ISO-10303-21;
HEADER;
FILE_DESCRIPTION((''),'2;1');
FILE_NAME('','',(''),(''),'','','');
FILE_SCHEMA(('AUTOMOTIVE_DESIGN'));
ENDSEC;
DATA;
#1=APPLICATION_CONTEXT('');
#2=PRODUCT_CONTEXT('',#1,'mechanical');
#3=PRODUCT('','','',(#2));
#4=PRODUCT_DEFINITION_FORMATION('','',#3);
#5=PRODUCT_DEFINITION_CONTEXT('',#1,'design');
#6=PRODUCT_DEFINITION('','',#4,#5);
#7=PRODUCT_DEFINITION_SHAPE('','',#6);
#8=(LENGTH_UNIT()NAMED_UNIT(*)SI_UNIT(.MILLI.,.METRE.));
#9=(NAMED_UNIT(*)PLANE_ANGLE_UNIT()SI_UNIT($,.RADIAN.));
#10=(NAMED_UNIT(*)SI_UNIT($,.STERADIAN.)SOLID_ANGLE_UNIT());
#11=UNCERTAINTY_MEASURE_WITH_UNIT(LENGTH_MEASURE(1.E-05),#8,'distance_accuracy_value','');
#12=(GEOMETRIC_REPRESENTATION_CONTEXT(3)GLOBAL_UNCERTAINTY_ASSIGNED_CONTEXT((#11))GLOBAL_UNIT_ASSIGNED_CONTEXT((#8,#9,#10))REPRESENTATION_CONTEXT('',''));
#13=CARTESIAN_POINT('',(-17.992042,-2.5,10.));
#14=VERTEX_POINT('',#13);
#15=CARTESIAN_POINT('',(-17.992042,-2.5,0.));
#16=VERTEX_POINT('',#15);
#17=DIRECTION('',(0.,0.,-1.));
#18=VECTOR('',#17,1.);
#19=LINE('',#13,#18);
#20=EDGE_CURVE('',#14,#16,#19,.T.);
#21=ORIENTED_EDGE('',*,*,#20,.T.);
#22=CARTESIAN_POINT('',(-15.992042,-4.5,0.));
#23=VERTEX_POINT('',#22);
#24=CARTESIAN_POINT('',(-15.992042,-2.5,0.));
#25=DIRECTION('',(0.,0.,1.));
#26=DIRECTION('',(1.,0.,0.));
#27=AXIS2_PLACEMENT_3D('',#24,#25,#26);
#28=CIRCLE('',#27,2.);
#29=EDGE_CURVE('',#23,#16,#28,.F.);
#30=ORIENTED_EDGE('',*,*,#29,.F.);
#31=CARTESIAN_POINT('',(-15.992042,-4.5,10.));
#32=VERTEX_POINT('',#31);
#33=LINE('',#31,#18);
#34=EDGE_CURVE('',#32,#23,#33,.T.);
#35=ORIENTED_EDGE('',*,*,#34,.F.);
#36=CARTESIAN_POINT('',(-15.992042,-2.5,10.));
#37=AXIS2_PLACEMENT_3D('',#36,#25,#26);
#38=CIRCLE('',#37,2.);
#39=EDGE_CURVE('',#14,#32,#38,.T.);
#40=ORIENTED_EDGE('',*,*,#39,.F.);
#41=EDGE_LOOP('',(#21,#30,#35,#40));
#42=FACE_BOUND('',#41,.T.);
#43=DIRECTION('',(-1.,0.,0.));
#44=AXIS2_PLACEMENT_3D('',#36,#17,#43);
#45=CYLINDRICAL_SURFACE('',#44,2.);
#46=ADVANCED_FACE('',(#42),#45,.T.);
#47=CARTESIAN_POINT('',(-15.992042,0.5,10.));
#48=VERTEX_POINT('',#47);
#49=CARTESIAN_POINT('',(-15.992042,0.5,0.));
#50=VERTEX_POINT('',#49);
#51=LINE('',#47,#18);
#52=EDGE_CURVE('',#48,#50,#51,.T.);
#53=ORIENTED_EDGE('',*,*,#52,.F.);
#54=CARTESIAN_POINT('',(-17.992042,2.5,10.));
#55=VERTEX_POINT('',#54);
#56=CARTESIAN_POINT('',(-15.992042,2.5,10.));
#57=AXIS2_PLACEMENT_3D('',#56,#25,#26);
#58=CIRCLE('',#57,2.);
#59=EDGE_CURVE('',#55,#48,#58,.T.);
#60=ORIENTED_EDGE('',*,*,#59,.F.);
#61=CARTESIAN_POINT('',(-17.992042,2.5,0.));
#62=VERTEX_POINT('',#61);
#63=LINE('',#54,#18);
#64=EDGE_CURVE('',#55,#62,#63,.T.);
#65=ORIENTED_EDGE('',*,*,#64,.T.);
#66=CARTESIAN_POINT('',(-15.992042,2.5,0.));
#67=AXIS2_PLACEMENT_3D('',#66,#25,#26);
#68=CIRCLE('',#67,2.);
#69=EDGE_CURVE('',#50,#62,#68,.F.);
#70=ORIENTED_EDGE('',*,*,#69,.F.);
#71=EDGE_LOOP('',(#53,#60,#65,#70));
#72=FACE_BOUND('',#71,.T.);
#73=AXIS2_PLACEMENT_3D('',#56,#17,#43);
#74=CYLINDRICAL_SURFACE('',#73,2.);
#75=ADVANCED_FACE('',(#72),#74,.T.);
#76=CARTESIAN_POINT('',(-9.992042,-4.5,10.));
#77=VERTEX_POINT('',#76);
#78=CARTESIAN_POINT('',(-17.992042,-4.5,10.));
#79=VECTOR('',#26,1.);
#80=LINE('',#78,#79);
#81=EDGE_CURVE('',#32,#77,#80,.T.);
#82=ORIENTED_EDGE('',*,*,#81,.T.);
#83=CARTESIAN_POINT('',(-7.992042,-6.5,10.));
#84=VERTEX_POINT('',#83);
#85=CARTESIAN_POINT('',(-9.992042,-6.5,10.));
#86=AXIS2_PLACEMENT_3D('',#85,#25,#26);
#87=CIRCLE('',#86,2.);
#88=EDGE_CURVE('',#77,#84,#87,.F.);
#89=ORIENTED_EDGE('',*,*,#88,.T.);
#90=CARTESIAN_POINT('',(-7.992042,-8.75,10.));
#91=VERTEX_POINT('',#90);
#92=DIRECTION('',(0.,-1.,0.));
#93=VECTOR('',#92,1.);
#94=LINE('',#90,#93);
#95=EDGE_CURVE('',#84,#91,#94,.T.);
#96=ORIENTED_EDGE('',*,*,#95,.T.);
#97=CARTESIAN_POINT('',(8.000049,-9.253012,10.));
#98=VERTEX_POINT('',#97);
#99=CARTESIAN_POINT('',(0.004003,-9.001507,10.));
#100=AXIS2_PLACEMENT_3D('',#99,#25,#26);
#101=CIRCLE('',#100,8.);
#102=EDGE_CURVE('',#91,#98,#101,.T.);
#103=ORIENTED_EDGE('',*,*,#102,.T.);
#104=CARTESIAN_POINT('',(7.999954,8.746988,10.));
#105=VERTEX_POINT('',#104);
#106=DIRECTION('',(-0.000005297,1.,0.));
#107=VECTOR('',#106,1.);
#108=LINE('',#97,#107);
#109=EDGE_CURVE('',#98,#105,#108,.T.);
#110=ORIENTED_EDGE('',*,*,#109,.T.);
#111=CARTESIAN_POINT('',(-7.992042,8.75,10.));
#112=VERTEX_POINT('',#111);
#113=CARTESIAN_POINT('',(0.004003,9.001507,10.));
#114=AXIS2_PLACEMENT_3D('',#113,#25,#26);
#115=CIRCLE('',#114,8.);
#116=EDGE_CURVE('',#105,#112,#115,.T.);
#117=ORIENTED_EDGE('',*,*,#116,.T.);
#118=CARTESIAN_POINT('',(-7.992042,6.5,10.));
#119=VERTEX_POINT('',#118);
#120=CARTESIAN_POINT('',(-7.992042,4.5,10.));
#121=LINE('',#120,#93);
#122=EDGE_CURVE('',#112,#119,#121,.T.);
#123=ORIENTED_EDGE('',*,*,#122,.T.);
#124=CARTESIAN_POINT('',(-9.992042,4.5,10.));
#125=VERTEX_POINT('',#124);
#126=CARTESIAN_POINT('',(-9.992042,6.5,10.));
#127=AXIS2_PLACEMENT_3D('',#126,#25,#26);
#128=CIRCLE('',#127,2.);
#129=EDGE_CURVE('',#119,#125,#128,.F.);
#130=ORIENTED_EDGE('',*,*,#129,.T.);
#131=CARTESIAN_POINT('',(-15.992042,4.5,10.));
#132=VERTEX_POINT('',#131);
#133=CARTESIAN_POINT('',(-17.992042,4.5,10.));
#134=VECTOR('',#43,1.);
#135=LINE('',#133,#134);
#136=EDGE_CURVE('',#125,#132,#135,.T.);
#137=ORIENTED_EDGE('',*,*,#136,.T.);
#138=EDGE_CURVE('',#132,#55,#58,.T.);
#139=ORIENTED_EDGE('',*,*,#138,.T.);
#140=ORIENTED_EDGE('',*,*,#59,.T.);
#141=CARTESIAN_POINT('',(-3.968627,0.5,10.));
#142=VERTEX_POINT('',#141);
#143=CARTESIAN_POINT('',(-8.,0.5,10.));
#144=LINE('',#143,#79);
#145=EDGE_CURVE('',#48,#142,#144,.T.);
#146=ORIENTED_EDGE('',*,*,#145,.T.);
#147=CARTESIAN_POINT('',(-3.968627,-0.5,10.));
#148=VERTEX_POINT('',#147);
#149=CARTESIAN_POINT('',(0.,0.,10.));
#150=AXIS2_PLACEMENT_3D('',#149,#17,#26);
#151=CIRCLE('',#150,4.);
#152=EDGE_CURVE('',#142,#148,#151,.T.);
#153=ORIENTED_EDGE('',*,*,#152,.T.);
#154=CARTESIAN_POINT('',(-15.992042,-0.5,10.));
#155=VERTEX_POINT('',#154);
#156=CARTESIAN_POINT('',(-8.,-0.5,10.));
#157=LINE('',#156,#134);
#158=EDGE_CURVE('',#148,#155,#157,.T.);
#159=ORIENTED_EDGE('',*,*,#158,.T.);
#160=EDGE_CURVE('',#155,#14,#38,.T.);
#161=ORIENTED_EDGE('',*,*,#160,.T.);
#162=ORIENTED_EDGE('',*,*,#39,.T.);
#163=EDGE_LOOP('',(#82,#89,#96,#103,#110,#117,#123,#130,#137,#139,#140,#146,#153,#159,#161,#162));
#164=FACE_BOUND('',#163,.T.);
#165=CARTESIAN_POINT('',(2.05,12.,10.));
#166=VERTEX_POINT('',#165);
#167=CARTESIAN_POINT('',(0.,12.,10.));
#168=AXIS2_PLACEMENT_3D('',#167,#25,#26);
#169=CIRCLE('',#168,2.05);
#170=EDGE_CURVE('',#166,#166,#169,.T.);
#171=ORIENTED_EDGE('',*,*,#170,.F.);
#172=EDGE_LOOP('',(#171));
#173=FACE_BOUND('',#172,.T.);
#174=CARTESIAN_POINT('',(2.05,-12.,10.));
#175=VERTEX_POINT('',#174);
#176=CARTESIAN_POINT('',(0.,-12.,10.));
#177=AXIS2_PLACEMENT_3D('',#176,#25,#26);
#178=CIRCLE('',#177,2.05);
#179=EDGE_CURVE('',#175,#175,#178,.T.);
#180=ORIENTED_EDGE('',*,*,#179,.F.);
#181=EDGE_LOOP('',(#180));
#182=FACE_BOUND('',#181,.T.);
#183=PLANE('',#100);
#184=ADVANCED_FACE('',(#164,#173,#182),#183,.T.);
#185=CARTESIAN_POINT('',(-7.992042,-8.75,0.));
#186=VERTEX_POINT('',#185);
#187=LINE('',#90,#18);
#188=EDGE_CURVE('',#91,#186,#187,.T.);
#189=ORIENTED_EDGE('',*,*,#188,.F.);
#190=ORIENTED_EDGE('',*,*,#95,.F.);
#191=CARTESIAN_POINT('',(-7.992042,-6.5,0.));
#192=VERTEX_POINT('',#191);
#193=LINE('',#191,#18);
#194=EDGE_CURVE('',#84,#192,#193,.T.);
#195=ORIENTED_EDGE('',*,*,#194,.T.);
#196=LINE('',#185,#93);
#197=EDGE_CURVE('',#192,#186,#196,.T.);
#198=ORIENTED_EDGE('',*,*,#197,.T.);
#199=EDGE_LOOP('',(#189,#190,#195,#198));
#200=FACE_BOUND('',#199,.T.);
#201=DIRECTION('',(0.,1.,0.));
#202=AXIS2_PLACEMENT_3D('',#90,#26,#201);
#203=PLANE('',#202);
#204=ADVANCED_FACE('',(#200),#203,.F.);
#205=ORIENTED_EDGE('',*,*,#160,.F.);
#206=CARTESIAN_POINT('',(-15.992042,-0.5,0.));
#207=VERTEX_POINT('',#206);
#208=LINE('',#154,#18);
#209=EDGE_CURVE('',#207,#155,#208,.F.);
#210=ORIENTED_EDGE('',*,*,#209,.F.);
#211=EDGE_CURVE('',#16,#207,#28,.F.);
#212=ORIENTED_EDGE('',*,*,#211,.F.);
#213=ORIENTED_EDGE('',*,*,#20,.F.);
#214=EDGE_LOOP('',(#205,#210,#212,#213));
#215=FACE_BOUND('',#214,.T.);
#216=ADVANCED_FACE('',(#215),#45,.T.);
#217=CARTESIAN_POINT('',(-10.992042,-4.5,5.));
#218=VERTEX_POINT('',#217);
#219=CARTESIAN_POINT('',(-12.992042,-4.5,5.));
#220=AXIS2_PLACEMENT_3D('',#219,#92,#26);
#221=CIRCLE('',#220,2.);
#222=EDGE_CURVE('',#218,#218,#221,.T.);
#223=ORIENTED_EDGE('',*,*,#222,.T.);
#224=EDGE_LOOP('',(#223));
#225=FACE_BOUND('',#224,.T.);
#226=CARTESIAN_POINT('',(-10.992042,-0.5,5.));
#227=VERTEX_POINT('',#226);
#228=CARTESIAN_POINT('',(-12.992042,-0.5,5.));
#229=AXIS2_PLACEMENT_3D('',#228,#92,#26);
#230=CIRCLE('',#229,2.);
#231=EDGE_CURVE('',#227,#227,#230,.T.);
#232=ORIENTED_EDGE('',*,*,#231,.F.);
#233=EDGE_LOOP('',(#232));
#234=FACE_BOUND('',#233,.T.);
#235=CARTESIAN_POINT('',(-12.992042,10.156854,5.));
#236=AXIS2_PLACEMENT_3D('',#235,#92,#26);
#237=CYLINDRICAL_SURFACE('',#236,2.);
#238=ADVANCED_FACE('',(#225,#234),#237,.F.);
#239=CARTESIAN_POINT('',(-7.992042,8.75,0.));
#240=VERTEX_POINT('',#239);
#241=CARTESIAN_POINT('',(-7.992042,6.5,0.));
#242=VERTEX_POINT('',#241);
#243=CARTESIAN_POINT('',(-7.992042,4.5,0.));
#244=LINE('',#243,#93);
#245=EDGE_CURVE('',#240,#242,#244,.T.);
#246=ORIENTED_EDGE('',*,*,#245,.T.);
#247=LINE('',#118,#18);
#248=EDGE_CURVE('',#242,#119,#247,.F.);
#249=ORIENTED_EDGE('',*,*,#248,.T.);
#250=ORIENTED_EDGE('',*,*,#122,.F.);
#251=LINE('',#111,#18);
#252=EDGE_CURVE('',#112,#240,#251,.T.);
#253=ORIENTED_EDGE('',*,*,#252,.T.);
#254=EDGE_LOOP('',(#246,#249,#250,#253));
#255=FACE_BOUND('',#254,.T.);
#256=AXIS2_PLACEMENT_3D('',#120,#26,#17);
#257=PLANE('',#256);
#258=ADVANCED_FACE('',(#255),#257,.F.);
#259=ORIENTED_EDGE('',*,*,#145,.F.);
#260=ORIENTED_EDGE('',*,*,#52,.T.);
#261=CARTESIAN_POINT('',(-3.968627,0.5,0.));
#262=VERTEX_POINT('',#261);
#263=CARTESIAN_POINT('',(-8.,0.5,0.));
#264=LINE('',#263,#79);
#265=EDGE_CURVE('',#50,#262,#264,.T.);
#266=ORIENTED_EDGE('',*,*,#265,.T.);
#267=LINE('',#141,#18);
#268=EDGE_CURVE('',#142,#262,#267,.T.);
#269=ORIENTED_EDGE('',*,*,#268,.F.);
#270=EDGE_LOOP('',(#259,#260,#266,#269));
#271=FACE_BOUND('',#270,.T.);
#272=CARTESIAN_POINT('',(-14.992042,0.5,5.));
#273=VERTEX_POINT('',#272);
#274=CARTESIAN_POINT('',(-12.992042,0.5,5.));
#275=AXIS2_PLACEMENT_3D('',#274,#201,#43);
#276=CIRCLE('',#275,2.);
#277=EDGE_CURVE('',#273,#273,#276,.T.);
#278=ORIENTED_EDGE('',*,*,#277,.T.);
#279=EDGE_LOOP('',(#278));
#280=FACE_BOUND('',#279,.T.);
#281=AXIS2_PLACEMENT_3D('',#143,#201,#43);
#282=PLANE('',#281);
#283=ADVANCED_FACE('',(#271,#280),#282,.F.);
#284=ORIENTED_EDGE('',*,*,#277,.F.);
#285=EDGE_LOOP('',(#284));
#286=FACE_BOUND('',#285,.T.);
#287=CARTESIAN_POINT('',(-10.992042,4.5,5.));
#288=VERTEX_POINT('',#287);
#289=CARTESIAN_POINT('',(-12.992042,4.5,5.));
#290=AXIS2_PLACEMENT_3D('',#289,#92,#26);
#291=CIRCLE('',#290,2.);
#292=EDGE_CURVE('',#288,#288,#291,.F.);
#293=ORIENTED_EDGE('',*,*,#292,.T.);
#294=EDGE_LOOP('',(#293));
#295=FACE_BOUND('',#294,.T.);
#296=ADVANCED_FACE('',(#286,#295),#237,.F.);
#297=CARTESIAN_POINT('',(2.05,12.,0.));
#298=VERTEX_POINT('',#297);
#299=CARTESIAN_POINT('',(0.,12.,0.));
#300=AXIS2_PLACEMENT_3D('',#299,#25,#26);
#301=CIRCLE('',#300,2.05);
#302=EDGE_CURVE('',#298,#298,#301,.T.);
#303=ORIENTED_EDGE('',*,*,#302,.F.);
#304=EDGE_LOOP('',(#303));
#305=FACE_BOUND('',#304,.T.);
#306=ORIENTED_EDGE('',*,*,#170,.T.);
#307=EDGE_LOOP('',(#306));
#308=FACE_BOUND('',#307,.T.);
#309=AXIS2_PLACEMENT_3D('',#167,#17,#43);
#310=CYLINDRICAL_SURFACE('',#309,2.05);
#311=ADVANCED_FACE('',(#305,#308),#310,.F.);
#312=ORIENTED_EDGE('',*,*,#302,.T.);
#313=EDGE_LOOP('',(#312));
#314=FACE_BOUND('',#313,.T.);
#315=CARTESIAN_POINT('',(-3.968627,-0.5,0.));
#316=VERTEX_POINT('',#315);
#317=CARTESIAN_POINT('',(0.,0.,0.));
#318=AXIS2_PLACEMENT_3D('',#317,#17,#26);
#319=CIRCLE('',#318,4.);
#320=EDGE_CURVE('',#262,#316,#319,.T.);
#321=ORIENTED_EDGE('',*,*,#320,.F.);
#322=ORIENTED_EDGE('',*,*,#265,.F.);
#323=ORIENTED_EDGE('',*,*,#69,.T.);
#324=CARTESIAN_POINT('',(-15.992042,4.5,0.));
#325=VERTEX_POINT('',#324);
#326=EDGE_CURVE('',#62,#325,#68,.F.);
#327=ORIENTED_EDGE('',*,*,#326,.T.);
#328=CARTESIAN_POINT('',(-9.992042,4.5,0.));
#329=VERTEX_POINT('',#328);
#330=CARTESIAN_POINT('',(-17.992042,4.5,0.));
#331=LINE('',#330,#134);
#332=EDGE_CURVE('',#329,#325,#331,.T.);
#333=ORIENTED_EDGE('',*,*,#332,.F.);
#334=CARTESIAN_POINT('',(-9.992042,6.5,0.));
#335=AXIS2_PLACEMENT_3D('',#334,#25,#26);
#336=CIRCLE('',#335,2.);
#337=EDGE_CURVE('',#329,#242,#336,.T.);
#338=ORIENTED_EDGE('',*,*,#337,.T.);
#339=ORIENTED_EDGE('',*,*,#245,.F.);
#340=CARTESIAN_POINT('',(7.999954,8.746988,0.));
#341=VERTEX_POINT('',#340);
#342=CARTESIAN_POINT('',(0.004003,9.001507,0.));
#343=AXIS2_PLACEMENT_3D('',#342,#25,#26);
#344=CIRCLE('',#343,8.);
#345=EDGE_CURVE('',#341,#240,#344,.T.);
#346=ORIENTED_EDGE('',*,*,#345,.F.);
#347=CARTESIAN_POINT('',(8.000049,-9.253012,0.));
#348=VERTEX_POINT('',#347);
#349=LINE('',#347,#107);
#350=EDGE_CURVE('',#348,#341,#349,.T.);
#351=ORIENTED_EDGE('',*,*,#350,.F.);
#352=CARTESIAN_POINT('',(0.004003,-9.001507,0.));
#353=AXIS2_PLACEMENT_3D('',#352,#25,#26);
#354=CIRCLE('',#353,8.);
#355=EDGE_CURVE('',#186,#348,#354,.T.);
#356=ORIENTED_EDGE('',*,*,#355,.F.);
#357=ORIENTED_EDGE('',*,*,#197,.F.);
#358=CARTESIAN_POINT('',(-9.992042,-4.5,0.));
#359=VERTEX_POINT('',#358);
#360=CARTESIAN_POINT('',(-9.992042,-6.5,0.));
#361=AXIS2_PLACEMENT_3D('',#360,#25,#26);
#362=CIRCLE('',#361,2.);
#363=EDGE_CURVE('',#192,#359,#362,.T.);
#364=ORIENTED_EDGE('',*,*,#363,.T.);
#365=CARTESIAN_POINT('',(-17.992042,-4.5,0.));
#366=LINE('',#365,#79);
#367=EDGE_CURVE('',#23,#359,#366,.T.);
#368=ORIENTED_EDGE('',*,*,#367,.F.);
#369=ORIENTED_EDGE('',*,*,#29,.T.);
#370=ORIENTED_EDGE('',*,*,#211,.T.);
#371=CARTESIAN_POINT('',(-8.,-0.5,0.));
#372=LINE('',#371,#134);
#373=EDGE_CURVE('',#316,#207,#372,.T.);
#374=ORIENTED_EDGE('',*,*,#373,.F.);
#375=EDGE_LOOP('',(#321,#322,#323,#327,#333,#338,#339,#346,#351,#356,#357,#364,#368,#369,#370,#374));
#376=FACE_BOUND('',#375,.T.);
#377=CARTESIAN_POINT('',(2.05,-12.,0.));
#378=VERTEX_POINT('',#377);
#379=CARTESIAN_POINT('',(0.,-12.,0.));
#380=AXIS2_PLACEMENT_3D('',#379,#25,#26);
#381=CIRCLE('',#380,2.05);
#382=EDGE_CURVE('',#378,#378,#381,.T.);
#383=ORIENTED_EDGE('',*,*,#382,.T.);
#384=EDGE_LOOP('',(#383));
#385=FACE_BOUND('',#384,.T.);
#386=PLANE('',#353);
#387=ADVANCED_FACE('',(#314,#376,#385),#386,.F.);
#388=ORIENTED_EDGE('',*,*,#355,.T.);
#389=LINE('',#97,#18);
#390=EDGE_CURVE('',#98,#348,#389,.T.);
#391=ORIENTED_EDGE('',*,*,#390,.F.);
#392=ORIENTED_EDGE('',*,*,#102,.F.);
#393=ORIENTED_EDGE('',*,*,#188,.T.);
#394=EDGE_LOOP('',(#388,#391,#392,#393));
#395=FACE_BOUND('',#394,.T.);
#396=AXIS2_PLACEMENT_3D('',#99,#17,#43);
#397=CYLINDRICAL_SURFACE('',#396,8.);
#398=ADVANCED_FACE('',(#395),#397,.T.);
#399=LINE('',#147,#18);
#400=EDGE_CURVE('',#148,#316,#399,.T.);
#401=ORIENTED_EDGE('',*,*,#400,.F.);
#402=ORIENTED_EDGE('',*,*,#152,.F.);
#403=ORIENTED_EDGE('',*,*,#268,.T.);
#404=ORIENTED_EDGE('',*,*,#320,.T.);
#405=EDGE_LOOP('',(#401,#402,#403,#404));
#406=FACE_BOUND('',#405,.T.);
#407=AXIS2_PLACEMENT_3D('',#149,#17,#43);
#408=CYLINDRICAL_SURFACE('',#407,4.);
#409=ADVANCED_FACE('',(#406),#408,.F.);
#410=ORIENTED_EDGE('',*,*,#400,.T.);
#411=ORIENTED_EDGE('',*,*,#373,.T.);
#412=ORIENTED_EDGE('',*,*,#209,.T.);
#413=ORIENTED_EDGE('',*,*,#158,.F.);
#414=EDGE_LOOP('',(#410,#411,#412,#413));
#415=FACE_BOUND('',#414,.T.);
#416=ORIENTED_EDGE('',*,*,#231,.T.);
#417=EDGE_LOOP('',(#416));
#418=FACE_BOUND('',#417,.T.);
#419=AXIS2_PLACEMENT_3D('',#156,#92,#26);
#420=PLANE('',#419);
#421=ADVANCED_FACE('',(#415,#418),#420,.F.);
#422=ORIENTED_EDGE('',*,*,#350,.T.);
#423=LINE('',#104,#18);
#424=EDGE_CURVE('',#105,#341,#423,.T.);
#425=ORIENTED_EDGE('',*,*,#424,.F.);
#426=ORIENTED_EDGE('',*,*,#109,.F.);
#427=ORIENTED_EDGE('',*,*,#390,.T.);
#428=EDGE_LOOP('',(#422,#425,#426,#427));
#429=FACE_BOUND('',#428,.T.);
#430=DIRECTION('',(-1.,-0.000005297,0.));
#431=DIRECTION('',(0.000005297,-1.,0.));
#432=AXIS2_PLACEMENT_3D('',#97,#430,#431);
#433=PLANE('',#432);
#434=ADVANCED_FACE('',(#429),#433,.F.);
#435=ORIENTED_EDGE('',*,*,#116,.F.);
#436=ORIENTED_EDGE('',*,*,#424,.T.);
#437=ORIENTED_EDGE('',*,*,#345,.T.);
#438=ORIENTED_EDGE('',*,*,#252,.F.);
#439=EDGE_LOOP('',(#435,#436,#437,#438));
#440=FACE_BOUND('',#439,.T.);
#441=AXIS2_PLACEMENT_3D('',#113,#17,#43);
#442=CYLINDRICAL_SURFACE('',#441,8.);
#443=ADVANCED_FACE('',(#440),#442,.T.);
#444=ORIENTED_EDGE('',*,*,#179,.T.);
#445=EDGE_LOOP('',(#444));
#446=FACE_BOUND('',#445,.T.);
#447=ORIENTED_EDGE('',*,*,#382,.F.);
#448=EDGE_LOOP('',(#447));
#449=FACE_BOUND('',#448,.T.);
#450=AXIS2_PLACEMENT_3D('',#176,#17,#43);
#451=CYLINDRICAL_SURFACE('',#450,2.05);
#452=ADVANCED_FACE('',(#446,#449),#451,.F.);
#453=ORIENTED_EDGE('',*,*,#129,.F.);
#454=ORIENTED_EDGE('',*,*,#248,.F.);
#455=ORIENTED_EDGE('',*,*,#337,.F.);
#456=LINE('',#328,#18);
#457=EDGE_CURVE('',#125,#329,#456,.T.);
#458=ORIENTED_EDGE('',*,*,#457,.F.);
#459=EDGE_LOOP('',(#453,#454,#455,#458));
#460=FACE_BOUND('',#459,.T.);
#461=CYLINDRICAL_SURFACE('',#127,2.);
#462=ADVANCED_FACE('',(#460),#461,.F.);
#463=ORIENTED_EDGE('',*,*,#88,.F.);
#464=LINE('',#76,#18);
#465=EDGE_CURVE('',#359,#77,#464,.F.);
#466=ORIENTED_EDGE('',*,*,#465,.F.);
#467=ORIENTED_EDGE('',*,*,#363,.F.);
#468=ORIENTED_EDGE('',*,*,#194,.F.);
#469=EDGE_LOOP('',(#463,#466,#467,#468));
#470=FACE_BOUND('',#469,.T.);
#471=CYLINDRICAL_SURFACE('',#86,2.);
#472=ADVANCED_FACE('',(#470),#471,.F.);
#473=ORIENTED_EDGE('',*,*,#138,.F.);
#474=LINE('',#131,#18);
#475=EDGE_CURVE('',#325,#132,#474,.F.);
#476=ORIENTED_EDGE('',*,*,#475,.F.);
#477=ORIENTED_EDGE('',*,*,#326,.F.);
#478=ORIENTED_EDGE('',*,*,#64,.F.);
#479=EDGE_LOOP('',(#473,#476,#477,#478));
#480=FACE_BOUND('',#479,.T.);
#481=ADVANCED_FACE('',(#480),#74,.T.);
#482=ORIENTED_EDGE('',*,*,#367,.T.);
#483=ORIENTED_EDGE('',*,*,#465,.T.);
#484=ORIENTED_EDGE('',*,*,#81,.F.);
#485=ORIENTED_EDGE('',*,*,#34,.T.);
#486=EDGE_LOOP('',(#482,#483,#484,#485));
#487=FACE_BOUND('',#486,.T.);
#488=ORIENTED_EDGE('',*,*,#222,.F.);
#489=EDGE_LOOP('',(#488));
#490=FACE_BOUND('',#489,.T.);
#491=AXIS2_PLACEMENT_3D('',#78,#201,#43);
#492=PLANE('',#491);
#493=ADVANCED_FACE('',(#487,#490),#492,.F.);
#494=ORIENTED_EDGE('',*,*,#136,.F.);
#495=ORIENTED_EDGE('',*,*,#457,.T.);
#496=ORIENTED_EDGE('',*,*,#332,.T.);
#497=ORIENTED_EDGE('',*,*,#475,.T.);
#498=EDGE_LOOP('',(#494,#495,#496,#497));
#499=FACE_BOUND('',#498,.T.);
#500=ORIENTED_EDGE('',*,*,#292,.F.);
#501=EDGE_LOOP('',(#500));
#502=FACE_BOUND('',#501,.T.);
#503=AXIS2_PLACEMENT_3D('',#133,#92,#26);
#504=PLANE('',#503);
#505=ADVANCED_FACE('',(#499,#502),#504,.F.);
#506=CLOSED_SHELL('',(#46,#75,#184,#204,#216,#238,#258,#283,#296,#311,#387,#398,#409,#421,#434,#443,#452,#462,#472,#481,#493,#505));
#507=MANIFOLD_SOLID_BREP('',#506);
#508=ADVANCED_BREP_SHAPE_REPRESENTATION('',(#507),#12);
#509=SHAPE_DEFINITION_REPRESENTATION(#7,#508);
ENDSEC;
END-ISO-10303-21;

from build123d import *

# Parameters (mm, degrees)
ESBO_O1_R                = 2.05
RESSALTO_EXTRUS_O1_DEPTH = 10
CORTE_EXTRUS_O1_REACH    = 31.766
ESBO_O2_R                = 2
FILETE1_R                = 2


with BuildPart() as part:
    # Esboço1 → Ressalto-extrusão1 (new body)
    with BuildSketch(Plane.XY):
        with BuildLine():
            Line((-7.992042116, -8.75), (-7.992042116, -4.5))
            Line((-7.992042116, -4.5), (-17.992042116, -4.5))
            Line((-17.992042116, -4.5), (-17.992042116, -0.5))
            Line((-17.992042116, -0.5), (-8, -0.5))
            Line((-8, -0.5), (-3.968626967, -0.5))
            ThreePointArc((-3.968626967, -0.5), (4, 0), (-3.968626967, 0.5))
            Line((-3.968626967, 0.5), (-8, 0.5))
            Line((-8, 0.5), (-17.992042116, 0.5))
            Line((-17.992042116, 0.5), (-17.992042116, 4.5))
            Line((-17.992042116, 4.5), (-7.992042116, 4.5))
            Line((-7.992042116, 4.5), (-7.992042116, 8.75))
            ThreePointArc((-7.992042116, 8.75), (0.005510323, 17.001506438), (7.999953669, 8.74698773))
            Line((7.999953669, 8.74698773), (8.000049012, -9.25301227))
            ThreePointArc((8.000049012, -9.25301227), (-0.247502701, -16.997552144), (-7.992042116, -8.75))
        make_face()
        with Locations((0, 12)):
            Circle(ESBO_O1_R, mode=Mode.SUBTRACT)
        with Locations((0, -12)):
            Circle(ESBO_O1_R, mode=Mode.SUBTRACT)
    extrude(amount=RESSALTO_EXTRUS_O1_DEPTH)

    # Corte-extrusão1: up to this face of the body (flat: up to its plane)
    corte_extrus_o1_end = Plane(part.part.faces().sort_by_distance((-12.992042116, 4.5, 5))[0])
    # Esboço2 → Corte-extrusão1 (cut, up to the picked face)
    with BuildSketch(Plane.XZ.offset(4.5), mode=Mode.PRIVATE) as corte_extrus_o1_sk1:
        with Locations((-12.992042116, 5)):
            Circle(ESBO_O2_R)
    corte_extrus_o1_tool1 = split(extrude(corte_extrus_o1_sk1.sketch, amount=-CORTE_EXTRUS_O1_REACH, mode=Mode.PRIVATE), bisect_by=corte_extrus_o1_end, keep=Keep.BOTH, mode=Mode.PRIVATE)
    add(corte_extrus_o1_tool1.solids().sort_by(Axis((-12.992042, -4.5, 5), (0, 1, 0)))[0], mode=Mode.SUBTRACT)

    # Filete1
    filete1_edges = [part.edges().sort_by_distance(p)[0] for p in [
        (-7.992042116, -4.5, 5),
        (-7.992042116, 4.5, 5),
        (-17.992042116, -4.5, 5),
        (-17.992042116, 0.5, 5),
        (-17.992042116, -0.5, 5),
        (-17.992042116, 4.5, 5),
    ]]
    fillet(filete1_edges, radius=FILETE1_R - 0.0001)  # a hair under: the kernel refuses the full size


solid = part.part
